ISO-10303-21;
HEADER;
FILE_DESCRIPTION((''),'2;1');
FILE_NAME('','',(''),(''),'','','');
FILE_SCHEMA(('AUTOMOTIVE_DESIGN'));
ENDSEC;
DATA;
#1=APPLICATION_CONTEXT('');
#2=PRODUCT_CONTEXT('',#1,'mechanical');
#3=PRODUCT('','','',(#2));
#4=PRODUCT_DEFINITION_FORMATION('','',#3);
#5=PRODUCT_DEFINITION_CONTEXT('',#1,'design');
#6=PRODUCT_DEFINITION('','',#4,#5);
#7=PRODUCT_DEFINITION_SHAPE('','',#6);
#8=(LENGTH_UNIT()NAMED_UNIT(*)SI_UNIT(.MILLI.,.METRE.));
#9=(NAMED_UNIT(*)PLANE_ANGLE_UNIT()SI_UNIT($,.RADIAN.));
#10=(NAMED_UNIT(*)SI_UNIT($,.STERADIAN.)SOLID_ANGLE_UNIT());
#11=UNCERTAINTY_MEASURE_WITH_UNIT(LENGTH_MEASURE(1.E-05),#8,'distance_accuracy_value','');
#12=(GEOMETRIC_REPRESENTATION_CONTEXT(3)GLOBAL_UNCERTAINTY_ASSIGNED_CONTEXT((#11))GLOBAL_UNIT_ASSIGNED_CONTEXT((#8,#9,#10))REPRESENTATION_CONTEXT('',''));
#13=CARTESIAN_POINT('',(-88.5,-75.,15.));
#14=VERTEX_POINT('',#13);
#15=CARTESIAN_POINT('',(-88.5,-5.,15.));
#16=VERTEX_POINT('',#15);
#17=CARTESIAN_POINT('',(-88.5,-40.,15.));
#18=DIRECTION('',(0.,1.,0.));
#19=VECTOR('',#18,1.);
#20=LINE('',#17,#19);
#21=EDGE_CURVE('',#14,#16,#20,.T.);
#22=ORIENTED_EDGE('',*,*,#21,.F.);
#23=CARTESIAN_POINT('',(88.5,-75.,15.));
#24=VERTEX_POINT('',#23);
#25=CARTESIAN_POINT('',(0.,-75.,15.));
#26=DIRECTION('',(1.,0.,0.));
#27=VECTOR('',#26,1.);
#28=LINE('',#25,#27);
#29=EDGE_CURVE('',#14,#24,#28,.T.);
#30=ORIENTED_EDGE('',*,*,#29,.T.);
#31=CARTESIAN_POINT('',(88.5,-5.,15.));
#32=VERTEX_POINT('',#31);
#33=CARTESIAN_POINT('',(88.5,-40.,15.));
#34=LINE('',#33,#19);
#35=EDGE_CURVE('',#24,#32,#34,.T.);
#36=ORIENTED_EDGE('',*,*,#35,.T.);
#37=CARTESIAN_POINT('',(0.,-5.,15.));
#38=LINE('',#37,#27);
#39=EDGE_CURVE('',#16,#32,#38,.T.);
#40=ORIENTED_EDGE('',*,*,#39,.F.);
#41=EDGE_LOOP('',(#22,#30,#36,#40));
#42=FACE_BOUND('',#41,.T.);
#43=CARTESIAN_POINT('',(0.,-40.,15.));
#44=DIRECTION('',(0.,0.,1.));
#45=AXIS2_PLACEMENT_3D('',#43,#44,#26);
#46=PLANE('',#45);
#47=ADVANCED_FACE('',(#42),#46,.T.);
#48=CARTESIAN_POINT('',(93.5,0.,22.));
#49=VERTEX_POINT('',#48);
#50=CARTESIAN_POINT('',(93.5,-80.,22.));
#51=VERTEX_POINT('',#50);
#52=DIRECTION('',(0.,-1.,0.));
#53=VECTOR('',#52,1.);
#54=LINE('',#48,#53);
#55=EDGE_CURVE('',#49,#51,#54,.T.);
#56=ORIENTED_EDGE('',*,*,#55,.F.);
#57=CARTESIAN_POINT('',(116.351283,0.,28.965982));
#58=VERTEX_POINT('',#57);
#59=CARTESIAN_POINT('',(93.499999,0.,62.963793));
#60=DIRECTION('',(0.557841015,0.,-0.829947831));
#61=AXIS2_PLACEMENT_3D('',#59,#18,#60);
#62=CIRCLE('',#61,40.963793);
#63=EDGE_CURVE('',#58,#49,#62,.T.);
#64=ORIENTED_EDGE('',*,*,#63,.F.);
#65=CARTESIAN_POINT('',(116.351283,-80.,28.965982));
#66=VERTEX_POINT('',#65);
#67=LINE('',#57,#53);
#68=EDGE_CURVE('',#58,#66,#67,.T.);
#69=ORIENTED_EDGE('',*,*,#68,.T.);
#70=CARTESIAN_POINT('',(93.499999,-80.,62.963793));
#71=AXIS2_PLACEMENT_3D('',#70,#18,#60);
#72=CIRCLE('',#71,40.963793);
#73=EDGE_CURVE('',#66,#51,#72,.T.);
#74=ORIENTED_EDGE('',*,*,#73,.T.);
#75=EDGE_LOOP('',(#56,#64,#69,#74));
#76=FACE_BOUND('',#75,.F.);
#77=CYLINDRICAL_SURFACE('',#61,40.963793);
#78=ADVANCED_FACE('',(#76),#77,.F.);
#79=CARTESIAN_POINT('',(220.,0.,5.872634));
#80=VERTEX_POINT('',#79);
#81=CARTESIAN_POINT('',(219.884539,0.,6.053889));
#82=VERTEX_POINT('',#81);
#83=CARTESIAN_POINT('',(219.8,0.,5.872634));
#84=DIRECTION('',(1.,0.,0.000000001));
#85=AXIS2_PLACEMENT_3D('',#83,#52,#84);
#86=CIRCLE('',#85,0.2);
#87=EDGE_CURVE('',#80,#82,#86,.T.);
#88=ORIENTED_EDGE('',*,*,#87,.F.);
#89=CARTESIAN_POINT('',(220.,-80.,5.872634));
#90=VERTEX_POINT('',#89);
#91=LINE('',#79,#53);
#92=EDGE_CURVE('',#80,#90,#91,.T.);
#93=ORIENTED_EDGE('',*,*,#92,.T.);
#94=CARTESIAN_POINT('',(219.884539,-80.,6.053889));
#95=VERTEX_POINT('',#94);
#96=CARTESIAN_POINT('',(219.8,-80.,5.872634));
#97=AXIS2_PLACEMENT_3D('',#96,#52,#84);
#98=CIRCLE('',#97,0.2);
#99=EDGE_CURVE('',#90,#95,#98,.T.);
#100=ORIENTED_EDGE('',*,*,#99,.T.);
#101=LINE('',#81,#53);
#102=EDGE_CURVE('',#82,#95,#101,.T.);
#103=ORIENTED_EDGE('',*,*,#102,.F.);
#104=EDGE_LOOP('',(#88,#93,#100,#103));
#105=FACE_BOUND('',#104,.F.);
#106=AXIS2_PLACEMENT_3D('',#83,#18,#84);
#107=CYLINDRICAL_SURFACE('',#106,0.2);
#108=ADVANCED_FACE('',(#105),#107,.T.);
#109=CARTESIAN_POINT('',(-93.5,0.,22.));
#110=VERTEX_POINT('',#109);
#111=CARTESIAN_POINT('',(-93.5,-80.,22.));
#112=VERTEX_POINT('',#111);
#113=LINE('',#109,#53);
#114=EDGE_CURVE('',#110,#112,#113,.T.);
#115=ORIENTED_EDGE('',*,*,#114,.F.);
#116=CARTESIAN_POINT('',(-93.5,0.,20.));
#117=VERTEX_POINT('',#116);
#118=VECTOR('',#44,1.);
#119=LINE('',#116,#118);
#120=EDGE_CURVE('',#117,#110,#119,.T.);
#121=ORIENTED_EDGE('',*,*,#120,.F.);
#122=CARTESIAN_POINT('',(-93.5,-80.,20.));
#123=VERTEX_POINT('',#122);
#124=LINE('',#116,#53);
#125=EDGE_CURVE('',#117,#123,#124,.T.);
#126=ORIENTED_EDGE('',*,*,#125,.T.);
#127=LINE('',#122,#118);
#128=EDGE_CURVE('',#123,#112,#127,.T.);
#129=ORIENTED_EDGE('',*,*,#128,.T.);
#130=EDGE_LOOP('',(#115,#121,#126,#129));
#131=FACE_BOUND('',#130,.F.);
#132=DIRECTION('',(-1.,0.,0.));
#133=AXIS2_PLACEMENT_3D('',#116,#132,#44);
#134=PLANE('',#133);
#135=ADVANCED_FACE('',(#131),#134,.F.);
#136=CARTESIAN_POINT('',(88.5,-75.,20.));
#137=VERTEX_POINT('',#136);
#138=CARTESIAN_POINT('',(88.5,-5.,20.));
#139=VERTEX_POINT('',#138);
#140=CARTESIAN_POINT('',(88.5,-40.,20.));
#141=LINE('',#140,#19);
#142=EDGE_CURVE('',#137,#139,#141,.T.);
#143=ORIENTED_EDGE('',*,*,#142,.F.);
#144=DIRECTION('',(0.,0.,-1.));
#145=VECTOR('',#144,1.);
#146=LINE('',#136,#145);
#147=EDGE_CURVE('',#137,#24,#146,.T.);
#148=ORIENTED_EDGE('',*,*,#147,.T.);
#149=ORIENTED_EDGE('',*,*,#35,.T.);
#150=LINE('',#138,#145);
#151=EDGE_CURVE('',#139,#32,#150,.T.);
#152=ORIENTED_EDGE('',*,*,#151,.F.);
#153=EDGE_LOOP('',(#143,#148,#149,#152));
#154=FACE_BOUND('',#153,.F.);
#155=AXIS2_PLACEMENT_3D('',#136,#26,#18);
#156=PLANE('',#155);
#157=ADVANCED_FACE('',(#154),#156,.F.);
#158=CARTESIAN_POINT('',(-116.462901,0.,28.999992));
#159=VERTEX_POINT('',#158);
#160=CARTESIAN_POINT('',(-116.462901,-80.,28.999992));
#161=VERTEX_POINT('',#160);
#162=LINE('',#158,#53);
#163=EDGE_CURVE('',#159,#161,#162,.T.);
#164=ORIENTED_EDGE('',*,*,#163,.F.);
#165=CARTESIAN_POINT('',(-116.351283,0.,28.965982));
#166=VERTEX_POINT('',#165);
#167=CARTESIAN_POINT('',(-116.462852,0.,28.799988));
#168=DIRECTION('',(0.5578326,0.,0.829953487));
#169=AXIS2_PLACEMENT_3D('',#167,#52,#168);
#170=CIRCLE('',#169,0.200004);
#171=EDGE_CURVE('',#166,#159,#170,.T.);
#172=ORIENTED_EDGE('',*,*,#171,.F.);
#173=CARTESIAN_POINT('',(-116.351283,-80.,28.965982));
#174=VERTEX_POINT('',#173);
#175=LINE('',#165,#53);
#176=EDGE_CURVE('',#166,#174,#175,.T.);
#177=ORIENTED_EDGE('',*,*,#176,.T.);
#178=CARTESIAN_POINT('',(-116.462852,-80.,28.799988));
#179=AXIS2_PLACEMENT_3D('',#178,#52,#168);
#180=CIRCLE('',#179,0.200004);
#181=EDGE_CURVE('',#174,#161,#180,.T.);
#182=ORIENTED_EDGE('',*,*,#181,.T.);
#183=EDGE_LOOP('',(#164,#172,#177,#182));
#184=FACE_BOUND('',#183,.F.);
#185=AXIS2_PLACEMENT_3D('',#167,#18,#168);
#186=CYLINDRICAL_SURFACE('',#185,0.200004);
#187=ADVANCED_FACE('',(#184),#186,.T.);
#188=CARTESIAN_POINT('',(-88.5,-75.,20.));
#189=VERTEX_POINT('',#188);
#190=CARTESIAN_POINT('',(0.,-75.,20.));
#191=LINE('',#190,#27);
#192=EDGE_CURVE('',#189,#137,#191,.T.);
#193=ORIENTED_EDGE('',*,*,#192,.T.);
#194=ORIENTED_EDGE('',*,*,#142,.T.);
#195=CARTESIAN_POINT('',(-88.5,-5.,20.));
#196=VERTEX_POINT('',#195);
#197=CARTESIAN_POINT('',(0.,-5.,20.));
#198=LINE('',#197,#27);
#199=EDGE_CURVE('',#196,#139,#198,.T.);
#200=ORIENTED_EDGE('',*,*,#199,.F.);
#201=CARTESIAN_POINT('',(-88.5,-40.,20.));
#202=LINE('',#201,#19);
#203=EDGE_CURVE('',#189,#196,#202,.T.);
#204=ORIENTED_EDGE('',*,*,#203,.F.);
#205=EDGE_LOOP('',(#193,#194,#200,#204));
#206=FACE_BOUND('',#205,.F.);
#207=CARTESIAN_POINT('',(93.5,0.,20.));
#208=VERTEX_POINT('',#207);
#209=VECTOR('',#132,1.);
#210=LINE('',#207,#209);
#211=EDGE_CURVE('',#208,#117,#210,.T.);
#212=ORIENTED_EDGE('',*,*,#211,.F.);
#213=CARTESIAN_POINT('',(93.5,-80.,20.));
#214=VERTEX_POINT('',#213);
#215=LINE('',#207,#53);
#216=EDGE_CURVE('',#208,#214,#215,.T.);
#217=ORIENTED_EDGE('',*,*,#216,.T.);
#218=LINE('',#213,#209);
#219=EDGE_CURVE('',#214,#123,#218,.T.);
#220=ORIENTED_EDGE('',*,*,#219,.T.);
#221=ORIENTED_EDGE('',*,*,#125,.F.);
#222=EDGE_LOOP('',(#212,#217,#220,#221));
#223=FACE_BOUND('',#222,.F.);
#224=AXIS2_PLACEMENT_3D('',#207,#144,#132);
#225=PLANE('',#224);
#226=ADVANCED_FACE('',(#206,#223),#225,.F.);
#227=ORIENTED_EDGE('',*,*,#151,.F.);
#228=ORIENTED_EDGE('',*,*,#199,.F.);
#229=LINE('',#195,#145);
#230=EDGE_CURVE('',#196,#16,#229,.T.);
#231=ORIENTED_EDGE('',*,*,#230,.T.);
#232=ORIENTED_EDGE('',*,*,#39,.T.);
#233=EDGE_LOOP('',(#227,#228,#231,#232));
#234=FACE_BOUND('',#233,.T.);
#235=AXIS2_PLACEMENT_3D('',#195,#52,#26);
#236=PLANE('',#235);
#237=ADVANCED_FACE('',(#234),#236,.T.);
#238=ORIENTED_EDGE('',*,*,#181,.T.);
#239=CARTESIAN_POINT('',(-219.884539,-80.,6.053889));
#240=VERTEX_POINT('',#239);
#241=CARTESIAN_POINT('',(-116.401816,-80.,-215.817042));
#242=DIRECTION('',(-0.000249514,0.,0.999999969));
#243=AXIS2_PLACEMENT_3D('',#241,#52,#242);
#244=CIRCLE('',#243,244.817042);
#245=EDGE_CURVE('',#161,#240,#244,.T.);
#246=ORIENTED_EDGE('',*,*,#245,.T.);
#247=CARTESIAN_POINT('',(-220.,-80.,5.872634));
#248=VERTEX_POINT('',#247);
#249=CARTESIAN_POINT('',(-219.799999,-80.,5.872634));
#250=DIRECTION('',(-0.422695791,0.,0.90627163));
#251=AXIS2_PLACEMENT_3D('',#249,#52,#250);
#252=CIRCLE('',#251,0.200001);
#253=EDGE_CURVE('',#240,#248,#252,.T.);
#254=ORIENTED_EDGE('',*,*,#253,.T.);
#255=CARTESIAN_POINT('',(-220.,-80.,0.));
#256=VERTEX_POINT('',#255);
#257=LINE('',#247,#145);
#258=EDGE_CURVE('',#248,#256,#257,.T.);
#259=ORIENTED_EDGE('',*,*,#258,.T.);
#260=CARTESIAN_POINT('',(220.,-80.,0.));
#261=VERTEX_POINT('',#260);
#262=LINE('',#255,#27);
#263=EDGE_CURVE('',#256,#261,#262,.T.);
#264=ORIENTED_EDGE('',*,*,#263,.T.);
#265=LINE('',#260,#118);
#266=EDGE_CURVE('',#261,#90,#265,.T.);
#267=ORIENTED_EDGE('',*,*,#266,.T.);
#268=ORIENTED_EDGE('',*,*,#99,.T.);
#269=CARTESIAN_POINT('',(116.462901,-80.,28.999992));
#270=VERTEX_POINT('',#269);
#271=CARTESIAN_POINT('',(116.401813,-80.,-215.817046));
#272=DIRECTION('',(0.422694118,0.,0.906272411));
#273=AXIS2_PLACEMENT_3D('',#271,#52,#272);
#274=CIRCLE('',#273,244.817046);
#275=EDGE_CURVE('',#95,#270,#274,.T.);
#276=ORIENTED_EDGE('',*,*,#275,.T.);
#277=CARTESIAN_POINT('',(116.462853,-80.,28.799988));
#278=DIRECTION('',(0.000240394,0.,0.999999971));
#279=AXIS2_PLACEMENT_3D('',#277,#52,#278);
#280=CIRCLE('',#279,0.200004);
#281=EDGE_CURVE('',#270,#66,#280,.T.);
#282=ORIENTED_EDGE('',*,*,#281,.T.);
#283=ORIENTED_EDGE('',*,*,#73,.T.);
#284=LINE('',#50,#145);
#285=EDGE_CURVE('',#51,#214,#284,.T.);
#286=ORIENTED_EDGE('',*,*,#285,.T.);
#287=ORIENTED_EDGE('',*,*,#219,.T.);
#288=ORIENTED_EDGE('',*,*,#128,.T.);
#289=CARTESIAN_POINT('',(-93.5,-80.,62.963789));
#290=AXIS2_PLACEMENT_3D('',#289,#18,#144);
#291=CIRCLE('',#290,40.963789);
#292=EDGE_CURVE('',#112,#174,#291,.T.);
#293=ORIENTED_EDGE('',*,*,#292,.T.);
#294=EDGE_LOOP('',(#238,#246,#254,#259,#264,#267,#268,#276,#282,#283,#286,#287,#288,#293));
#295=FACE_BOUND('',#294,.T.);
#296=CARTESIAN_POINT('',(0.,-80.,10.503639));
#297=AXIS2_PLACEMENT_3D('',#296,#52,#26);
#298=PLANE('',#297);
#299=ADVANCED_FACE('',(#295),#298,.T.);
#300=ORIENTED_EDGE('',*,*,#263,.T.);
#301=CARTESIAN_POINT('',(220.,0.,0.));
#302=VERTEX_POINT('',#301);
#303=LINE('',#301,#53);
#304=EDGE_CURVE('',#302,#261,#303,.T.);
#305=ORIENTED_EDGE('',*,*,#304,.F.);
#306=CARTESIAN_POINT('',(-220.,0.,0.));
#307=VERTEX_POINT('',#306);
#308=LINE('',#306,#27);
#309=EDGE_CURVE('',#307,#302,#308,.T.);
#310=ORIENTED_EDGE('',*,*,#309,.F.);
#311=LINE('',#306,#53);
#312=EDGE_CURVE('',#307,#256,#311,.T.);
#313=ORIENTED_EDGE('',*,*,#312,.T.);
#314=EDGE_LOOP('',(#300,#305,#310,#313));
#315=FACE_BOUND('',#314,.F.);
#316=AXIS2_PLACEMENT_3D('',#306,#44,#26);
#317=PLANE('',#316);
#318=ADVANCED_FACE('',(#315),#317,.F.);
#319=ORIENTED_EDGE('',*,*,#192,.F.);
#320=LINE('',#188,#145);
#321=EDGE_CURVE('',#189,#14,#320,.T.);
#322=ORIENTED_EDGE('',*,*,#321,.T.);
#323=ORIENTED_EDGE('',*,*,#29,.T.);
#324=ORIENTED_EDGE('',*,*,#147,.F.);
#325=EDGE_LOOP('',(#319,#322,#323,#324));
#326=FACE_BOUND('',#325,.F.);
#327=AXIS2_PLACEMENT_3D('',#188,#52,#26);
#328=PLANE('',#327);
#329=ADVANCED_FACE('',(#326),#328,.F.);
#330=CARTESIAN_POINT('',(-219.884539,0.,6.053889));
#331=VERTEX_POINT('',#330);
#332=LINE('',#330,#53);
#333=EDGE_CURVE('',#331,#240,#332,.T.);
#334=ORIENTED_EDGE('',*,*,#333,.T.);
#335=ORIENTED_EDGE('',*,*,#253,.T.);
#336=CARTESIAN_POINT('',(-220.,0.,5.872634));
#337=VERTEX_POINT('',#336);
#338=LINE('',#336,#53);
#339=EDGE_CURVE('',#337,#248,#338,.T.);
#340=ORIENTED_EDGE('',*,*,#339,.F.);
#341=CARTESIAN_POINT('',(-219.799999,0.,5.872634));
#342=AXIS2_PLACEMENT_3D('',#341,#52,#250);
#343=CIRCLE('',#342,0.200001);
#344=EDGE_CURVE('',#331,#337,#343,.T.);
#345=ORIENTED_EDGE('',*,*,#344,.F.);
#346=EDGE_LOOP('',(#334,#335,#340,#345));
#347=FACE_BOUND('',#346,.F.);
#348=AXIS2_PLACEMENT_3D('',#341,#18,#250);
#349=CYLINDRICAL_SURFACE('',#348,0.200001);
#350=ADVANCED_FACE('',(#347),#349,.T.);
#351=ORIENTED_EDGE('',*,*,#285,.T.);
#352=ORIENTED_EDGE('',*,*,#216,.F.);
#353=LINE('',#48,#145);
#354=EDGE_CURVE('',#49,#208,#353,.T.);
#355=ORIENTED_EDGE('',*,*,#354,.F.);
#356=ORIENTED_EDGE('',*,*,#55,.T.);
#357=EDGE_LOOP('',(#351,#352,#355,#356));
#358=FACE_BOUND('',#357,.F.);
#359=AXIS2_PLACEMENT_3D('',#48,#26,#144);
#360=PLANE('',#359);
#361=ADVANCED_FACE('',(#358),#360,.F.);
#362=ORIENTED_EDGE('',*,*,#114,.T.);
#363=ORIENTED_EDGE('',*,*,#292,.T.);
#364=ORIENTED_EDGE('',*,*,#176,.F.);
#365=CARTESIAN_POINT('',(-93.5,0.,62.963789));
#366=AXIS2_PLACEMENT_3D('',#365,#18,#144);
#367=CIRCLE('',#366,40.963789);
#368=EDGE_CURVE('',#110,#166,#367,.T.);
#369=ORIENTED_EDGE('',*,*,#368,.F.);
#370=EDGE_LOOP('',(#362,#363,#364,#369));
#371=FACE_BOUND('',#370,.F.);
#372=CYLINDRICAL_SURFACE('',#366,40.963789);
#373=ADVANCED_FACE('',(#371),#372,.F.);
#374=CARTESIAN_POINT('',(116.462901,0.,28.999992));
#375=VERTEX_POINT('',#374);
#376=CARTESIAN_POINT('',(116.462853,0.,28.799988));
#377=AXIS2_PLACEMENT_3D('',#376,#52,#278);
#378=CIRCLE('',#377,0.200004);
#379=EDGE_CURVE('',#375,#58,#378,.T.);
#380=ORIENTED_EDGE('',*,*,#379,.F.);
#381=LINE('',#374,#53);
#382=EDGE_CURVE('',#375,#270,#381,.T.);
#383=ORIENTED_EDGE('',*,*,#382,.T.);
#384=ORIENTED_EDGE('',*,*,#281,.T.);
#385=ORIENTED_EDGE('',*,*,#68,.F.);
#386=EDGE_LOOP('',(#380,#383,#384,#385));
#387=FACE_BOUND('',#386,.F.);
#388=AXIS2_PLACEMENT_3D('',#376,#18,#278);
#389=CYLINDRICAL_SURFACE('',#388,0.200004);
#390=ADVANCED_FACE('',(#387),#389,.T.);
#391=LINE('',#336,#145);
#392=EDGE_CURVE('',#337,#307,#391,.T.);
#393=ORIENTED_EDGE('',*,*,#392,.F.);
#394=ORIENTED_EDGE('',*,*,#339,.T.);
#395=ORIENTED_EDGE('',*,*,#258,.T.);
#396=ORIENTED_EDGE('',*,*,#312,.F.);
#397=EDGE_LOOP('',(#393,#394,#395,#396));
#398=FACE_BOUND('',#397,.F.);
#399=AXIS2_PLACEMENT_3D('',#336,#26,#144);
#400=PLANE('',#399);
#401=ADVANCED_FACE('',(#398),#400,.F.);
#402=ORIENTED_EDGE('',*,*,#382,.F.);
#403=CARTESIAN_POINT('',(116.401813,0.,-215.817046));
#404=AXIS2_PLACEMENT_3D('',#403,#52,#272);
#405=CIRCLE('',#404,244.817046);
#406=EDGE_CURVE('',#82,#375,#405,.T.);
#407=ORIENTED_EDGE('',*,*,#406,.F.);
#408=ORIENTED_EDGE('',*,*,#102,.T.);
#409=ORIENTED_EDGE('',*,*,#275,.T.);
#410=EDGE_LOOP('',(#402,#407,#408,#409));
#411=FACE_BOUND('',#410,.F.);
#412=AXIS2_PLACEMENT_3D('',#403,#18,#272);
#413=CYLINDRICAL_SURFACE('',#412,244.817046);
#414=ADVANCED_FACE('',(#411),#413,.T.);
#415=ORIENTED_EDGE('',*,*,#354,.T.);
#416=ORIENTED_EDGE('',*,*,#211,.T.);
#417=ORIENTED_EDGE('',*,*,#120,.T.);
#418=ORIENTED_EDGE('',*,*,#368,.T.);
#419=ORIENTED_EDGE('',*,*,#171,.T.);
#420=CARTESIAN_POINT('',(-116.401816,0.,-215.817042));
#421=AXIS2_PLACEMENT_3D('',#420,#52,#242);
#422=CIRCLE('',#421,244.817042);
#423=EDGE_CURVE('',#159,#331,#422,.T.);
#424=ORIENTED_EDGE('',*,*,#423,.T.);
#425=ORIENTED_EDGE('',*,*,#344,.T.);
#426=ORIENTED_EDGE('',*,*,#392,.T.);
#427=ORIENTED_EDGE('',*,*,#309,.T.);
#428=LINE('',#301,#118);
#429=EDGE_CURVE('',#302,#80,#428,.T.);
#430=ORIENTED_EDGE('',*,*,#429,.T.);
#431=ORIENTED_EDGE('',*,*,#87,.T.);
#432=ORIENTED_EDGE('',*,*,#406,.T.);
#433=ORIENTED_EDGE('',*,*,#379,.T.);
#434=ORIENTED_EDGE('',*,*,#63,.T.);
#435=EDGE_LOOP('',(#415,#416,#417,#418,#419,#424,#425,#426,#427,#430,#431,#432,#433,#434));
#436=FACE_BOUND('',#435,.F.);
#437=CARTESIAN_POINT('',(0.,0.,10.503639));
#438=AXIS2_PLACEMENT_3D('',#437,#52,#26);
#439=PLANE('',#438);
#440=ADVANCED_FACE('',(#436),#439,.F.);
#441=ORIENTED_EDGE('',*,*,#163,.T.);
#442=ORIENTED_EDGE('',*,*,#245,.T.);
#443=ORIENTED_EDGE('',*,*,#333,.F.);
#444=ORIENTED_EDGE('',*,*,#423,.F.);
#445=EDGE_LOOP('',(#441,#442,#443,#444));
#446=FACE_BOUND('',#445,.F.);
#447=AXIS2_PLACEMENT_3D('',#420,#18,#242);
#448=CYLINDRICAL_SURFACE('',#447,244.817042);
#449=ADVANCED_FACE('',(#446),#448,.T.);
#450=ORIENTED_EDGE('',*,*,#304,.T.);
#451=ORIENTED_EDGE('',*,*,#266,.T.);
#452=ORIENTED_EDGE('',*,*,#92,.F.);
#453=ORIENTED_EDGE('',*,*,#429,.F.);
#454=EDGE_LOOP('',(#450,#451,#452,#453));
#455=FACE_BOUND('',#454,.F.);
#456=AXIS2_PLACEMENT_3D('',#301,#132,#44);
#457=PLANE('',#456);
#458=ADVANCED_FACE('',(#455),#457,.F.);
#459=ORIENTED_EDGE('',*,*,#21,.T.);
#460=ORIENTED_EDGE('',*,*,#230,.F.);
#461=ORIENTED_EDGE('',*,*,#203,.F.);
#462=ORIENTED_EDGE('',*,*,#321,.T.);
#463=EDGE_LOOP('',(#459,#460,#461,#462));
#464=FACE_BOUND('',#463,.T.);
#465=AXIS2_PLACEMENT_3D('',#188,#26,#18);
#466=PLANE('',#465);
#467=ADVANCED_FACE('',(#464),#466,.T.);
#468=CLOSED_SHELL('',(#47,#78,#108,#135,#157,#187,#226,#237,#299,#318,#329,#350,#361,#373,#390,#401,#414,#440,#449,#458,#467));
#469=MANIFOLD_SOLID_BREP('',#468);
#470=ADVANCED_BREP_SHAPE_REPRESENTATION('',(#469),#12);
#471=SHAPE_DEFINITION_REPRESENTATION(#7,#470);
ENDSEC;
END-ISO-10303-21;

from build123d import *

# Parameters (mm, degrees)
F1_DEPTH = 80
F3_W     = 177
F3_H     = 70
F4_DEPTH = 5


# Not quite as in the source:
# - ends of sketch curves that miss each other by under 0.0002 mm in the source are joined


with BuildPart() as f1:
    # F0 (on Front) → F1 (new body)
    with BuildSketch(Plane.XZ):
        with BuildLine():
            Line((-220, 0), (0, 0))
            Line((0, 0), (220, 0))
            Line((220, 0), (220, 5.872634))
            ThreePointArc((220, 5.872634), (219.9686827703, 5.9800868873), (219.8845387701, 6.0538885071))
            ThreePointArc((219.8845387701, 6.0538885071), (169.4297421053, 23.1880267358), (116.462901, 28.9999923785))
            ThreePointArc((116.462901, 28.9999923785), (116.4045566452, 28.9913078859), (116.3512831377, 28.9659817952))
            ThreePointArc((116.3512831377, 28.9659817952), (105.4447272771, 23.7801763601), (93.5, 22))
            Line((93.5, 22), (93.5, 20))
            Line((93.5, 20), (0, 20))
            Line((0, 20), (-93.5, 20))
            Line((-93.5, 20), (-93.5, 22))
            ThreePointArc((-93.5, 22), (-105.4447272771, 23.7801763601), (-116.351282957, 28.965982064))
            ThreePointArc((-116.351282957, 28.965982064), (-116.4045566452, 28.9913078859), (-116.462901, 28.9999919938))
            ThreePointArc((-116.462901, 28.9999919938), (-169.4297421053, 23.1880267358), (-219.8845388425, 6.0538886623))
            ThreePointArc((-219.8845388425, 6.0538886623), (-219.9686827703, 5.9800868873), (-220, 5.872634))
            Line((-220, 5.872634), (-220, 0))
        make_face()
    extrude(amount=F1_DEPTH)

    # F3 (on face) → F4 (cut)
    with BuildSketch(Plane.XY.offset(20)):
        with Locations((0, -40)):
            Rectangle(F3_W, F3_H)
    extrude(amount=-F4_DEPTH, mode=Mode.SUBTRACT)


solid = f1.part
